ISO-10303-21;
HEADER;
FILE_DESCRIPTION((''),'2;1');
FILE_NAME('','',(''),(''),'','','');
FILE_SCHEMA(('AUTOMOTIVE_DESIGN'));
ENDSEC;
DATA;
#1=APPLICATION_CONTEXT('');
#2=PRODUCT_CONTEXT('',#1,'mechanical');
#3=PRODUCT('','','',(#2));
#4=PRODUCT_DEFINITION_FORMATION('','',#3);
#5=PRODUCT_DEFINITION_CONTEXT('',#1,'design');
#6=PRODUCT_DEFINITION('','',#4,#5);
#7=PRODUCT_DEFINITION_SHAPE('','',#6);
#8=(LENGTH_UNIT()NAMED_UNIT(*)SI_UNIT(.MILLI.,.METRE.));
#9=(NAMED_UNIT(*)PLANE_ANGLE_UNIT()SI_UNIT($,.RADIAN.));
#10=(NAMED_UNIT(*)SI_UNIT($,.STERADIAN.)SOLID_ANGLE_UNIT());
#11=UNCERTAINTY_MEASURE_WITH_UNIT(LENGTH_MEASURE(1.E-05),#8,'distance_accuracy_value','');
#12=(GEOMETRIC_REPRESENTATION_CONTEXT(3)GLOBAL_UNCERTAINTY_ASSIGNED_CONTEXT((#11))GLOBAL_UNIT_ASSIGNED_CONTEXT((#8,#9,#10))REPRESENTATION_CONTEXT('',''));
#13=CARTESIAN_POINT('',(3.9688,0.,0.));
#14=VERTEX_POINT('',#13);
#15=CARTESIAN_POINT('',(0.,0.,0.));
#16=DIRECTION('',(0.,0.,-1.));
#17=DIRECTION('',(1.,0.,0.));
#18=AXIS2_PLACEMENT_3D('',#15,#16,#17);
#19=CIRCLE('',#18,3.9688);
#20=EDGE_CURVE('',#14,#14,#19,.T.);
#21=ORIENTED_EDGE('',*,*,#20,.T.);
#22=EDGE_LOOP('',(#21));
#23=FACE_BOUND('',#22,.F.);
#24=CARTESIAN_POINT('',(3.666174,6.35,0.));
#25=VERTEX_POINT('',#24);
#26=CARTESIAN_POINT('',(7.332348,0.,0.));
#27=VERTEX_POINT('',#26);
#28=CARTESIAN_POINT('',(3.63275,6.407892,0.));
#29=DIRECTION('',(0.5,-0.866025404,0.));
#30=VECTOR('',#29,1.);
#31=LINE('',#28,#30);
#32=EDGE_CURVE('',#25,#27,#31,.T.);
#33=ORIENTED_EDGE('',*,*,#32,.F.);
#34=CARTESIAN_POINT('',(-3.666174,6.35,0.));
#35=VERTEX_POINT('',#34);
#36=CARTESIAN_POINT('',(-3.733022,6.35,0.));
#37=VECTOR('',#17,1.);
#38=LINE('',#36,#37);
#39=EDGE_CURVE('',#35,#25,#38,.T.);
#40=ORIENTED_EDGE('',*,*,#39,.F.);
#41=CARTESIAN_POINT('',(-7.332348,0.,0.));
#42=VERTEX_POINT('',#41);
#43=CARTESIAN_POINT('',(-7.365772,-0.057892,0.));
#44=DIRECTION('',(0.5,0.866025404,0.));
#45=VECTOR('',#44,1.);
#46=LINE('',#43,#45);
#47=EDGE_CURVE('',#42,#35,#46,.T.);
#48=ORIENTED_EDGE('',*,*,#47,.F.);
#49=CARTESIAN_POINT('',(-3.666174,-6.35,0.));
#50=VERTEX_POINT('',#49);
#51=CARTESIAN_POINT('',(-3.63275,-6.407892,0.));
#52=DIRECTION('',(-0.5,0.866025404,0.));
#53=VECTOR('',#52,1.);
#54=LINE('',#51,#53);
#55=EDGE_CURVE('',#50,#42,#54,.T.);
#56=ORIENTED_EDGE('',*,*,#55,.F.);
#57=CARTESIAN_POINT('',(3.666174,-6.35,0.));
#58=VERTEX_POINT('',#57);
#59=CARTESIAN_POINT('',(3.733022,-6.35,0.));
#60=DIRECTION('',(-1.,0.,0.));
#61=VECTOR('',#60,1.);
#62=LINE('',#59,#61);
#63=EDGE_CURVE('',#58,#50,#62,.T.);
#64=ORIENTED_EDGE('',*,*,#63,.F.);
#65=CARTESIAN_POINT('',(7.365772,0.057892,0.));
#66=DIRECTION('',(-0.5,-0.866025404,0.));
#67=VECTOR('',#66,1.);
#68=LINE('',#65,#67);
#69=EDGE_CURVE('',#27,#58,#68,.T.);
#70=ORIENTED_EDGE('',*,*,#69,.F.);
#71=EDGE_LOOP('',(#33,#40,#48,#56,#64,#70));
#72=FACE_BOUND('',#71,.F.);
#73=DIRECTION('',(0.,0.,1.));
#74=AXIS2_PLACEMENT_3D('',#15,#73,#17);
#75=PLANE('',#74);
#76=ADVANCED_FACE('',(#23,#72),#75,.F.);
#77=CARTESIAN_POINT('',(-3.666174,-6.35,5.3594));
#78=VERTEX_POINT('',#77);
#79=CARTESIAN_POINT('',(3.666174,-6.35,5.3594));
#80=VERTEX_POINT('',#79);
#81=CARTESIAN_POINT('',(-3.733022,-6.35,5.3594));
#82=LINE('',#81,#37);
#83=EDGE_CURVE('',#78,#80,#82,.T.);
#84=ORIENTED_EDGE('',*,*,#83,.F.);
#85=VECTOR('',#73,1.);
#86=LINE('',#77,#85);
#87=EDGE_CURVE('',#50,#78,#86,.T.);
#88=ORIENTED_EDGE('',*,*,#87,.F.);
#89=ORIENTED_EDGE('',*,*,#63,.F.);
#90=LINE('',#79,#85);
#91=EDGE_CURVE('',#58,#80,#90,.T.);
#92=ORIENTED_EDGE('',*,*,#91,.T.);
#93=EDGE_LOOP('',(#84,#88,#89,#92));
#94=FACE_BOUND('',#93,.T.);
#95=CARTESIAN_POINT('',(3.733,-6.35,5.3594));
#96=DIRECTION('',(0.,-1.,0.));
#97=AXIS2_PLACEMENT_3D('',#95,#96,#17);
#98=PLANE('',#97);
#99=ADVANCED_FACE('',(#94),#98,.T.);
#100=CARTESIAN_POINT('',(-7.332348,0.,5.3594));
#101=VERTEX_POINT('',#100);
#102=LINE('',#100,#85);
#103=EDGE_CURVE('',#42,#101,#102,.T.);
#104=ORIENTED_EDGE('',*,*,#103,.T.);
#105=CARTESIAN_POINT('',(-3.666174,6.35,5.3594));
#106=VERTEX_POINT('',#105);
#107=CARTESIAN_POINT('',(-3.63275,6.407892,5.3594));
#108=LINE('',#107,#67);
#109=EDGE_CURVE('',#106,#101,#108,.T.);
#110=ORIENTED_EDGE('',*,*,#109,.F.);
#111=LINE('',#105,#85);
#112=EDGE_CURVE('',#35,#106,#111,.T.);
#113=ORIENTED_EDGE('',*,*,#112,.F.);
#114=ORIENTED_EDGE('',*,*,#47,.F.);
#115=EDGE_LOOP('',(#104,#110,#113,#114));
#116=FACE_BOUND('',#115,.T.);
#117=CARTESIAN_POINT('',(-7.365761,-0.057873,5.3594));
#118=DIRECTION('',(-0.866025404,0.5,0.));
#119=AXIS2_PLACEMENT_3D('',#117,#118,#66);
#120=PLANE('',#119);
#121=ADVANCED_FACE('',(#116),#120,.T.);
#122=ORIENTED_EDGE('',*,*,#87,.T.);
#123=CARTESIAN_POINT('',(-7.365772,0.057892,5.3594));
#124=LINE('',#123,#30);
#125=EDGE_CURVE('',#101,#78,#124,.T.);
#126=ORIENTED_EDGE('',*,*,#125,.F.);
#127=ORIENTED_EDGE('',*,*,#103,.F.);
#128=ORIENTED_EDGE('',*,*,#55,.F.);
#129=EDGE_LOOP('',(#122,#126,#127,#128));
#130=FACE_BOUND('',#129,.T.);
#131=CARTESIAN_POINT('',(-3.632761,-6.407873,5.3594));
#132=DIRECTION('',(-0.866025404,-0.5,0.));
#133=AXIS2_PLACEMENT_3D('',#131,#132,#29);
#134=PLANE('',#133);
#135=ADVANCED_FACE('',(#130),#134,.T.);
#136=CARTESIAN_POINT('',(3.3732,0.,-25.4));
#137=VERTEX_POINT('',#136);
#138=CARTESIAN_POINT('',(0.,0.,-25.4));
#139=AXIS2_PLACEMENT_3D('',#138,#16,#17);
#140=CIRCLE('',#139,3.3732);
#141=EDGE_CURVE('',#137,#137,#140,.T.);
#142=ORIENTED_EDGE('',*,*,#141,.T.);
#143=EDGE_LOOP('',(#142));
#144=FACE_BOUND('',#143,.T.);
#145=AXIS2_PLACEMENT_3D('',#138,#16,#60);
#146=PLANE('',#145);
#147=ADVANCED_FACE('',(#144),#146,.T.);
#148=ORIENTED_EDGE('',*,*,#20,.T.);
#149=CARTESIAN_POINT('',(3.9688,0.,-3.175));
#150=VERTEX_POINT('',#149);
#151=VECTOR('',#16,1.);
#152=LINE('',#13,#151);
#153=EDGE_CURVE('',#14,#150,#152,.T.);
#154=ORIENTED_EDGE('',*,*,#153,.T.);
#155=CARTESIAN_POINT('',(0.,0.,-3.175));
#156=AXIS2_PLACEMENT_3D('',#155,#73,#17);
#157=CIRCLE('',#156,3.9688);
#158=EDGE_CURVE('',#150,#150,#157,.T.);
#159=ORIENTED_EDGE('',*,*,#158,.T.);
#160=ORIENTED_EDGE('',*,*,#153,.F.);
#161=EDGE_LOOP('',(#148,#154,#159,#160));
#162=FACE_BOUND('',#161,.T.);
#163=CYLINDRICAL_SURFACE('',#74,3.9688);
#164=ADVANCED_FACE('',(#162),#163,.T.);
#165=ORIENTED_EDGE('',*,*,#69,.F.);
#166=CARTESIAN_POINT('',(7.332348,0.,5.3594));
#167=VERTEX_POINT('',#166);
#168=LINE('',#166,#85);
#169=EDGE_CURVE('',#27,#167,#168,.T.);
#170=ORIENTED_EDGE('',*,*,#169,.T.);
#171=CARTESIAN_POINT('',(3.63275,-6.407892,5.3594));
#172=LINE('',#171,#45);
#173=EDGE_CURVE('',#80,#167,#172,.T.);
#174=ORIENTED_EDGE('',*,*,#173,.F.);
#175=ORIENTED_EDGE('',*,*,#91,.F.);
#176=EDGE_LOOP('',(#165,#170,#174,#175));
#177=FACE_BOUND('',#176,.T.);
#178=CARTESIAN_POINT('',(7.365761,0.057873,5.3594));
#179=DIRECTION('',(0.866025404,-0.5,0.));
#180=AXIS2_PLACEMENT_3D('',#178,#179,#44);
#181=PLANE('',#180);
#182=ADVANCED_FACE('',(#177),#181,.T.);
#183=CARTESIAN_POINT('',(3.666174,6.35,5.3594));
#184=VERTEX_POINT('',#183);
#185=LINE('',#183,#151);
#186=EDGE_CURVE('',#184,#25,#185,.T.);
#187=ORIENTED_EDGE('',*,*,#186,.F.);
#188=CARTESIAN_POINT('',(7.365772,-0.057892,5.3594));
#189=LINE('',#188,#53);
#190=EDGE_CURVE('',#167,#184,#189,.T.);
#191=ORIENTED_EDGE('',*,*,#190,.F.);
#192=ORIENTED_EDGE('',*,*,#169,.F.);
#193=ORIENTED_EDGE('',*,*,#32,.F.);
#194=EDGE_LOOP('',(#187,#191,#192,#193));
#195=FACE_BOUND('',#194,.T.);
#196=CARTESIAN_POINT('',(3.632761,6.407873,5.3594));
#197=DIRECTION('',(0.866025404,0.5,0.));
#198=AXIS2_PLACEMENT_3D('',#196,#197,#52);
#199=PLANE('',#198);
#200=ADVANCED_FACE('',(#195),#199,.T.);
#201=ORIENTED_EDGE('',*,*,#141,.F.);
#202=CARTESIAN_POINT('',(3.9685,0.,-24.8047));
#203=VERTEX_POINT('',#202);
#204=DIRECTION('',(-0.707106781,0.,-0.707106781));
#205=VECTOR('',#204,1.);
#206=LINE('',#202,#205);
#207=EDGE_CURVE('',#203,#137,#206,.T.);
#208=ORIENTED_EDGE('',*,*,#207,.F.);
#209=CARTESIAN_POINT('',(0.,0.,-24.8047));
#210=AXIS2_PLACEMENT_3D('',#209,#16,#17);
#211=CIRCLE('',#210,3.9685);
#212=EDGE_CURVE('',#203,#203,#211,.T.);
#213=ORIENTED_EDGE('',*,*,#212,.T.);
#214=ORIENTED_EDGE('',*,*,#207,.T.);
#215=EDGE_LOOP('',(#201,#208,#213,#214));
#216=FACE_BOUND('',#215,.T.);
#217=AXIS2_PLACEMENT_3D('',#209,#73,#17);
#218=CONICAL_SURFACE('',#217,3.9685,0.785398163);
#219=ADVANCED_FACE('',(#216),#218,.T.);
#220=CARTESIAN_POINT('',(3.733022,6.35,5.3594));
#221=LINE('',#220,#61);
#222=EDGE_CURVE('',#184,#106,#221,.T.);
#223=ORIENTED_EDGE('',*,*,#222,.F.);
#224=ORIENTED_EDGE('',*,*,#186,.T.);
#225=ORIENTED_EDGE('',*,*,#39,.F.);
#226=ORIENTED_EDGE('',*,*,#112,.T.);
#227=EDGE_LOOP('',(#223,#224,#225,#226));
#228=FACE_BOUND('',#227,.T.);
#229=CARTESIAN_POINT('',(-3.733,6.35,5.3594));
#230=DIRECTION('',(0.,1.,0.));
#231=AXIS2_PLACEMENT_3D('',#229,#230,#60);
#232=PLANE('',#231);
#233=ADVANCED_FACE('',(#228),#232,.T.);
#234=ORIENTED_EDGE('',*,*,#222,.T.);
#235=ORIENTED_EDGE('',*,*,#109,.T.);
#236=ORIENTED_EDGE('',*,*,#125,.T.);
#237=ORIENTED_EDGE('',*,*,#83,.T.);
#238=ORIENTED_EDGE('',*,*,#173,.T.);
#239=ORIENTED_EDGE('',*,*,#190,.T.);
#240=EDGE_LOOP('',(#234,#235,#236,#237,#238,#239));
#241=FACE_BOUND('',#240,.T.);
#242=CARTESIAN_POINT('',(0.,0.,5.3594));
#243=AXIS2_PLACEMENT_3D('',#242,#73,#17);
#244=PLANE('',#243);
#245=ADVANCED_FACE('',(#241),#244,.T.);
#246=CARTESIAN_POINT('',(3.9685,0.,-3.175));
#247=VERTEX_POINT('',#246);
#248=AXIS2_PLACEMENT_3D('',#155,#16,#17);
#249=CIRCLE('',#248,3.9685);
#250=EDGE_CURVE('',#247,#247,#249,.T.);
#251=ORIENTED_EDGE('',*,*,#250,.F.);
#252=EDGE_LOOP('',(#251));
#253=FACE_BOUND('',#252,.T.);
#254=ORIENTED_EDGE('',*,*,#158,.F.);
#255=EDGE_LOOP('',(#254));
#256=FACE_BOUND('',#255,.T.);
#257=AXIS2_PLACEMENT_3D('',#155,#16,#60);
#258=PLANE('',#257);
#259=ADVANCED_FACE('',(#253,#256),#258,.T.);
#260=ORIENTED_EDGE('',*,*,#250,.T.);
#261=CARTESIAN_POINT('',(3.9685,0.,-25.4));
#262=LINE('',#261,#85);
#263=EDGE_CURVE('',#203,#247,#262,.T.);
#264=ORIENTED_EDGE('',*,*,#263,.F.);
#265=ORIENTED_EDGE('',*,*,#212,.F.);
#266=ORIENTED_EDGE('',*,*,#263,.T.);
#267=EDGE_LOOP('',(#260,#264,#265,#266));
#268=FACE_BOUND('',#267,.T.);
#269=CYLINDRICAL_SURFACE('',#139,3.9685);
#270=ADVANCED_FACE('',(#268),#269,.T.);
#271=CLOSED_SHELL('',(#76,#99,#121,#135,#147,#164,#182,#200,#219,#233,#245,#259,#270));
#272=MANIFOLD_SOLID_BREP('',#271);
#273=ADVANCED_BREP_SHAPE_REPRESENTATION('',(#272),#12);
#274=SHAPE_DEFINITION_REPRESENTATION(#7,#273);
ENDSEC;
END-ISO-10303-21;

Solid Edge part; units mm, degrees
sketch "Sketch1" plane through (0, 0, 0) normal (0, 0, 1) x (1, 0, 0)
  circle A0 centre (0, 0) radius 7.366
  dimension "D1" = 14.732
extrude "Protrusion1" add sketch "Sketch1" along normal blind 5.3594
sketch "Sketch2" plane through (0, 0, 0) normal (0, 0, -1) x (1, 0, 0)
  circle A0 centre (0, 0) radius 3.9688
extrude "Protrusion2" add sketch "Sketch2" along normal blind 25.4
sketch "Sketch3" plane through (0, 0, -25.4) normal (0, 0, -1) x (1, 0, 0)
  circle A0 centre (0, 0) radius 3.9685
extrude "Cutout1" cut sketch "Sketch3" against normal blind 22.225 flip side to cut
chamfer "Chamfer_1" distance 0.5953 angle 45 1 edges at (-3.9685, 0, -25.4)
sketch "Sketch4" plane through (0, 0, 5.3594) normal (0, 0, 1) x (1, 0, 0)
  line L0 (-3.733, 6.35) -> (3.733, 6.35)
  dimension "D1" = 12.7
extrude "Cutout2" cut sketch "Sketch4" against normal up to next material side at (0, 6.4, 5.3594)
pattern_circular "Pattern1" count 6 over 360 about axis through (0, 0, 5.3594) along (0, 0, 1) of "Cutout2"
properties part number "108851"
